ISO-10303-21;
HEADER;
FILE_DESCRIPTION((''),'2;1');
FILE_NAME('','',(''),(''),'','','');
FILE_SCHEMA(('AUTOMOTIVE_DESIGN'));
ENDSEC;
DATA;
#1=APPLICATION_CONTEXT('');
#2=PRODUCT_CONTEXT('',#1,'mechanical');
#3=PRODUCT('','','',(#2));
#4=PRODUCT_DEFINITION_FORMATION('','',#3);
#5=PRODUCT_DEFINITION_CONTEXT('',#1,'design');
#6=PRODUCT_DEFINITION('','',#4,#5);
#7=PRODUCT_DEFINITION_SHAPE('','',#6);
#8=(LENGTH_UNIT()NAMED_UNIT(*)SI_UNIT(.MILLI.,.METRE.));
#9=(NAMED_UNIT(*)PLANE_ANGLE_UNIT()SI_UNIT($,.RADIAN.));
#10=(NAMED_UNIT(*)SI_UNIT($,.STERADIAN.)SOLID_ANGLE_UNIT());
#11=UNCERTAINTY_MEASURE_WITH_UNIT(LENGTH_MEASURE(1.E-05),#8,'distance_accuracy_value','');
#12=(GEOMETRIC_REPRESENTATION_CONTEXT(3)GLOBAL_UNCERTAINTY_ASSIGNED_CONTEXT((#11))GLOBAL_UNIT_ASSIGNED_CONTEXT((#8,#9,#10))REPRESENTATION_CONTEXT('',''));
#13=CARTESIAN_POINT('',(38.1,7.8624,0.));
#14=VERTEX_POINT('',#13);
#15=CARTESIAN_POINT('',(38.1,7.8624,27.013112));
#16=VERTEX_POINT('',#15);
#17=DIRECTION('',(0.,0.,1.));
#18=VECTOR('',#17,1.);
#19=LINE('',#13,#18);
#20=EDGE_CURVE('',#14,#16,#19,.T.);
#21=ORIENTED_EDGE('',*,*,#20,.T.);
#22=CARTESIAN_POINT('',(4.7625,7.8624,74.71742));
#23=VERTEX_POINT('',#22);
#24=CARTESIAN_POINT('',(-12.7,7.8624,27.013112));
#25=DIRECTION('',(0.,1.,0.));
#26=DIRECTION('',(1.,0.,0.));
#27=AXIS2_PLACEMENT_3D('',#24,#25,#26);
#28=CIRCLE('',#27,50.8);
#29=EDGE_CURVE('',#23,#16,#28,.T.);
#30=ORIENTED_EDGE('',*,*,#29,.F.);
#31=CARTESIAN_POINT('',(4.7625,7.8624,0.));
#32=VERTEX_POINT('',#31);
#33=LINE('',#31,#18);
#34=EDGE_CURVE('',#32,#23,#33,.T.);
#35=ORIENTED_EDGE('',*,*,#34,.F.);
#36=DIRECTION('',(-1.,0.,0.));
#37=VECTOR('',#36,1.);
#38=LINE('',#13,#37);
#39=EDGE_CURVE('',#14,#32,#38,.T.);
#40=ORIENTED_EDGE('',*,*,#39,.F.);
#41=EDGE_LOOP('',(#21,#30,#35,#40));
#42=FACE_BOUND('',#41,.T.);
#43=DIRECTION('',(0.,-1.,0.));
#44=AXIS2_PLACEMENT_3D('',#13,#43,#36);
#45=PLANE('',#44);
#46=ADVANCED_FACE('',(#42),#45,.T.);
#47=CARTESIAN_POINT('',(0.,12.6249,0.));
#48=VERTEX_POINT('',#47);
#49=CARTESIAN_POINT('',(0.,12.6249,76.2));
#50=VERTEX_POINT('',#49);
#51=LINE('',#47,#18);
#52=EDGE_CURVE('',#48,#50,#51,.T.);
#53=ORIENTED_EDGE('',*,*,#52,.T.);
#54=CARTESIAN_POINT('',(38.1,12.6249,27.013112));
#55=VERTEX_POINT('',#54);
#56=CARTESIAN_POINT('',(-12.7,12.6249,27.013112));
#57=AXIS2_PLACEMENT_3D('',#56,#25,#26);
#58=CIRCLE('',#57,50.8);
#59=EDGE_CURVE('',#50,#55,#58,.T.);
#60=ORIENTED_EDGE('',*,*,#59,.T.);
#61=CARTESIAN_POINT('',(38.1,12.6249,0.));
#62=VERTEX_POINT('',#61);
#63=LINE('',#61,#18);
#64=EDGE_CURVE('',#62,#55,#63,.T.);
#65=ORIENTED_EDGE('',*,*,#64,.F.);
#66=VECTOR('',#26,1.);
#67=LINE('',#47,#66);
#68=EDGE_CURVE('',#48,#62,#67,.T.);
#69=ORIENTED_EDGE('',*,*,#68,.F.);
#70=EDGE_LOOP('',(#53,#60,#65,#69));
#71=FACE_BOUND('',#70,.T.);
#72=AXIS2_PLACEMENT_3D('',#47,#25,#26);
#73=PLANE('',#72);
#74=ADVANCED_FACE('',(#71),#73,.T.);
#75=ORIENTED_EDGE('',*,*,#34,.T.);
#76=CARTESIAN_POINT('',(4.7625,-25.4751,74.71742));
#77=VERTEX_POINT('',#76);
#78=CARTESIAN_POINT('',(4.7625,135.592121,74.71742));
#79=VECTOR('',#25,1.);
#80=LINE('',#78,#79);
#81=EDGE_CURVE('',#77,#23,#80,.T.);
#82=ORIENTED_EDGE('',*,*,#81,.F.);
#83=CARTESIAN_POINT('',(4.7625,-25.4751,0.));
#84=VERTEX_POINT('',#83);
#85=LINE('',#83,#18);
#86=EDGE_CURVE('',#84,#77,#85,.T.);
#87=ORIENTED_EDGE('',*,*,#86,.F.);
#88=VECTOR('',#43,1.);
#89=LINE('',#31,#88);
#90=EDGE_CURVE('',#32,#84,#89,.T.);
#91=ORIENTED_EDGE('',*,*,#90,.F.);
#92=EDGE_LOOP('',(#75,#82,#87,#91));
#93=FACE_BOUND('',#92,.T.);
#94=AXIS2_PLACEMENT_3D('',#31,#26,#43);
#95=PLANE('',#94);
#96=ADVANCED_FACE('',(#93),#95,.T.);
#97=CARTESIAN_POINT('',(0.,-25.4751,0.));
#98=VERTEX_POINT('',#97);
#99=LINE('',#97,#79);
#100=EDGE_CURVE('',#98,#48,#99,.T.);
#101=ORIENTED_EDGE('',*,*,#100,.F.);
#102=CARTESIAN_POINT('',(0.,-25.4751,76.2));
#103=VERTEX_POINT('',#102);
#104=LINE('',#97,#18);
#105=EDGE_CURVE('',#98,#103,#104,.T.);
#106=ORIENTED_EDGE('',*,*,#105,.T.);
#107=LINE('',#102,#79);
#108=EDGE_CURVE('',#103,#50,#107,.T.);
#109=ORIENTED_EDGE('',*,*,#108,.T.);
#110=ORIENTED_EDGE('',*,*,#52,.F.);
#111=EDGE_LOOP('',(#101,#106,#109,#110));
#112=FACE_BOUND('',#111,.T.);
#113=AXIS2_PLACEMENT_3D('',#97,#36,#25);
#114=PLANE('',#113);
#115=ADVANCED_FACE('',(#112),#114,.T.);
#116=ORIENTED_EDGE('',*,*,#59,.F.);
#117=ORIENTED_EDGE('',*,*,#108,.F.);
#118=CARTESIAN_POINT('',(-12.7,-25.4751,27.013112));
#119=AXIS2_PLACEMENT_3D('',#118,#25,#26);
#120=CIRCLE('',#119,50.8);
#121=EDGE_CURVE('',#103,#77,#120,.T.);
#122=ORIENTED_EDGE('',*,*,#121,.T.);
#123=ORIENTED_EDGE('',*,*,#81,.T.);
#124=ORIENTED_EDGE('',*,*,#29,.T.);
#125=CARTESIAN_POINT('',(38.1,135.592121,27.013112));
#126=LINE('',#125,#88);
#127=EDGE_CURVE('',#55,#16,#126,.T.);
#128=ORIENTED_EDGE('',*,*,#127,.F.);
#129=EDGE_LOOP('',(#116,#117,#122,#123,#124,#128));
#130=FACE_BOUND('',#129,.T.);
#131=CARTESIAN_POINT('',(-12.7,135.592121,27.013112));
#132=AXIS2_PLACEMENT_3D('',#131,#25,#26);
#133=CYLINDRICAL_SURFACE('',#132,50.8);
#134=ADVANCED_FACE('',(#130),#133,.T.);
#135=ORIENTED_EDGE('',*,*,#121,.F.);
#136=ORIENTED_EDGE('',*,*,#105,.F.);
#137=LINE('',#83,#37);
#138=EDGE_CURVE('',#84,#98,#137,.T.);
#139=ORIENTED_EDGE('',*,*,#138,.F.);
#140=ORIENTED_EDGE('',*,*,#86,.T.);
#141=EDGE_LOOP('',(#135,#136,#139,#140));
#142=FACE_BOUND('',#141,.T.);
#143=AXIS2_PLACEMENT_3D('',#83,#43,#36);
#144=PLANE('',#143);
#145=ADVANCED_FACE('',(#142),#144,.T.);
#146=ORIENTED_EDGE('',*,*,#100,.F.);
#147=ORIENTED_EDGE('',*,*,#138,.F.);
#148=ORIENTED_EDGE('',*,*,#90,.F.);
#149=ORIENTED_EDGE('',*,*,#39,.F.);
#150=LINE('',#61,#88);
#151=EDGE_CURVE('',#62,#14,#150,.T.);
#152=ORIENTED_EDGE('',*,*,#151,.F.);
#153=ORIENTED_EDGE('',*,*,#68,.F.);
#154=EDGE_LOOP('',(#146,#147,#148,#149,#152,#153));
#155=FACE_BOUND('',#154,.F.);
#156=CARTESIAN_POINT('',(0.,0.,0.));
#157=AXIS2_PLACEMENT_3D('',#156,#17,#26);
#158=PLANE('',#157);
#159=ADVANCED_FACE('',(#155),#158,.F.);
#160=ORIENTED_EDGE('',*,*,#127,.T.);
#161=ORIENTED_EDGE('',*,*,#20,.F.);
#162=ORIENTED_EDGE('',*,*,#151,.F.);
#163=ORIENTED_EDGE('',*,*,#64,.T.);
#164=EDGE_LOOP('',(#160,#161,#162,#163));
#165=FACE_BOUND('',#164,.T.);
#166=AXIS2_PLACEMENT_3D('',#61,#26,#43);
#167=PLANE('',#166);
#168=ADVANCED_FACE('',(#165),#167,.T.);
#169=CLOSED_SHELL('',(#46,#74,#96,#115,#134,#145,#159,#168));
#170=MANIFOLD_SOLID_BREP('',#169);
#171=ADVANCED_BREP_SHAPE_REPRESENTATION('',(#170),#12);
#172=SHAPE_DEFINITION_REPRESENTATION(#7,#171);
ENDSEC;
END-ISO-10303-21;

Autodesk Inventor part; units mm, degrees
ref_plane "YZ Plane" through (0, 0, 0) normal (1, 0, 0) x (0, 1, 0)
ref_plane "XZ Plane" through (0, 0, 0) normal (0, 1, 0) x (-1, 0, 0)
ref_plane "XY Plane" through (0, 0, 0) normal (0, 0, 1) x (1, 0, 0)
sketch "Sketch1" plane through (0, 0, 0) normal (0, 0, 1) x (1, 0, 0)
  line L0 (0, 12.6249) -> (38.1, 12.6249)
  line L1 (38.1, 12.6249) -> (38.1, 7.8624)
  line L2 (38.1, 7.8624) -> (4.7625, 7.8624)
  line L3 (4.7625, 7.8624) -> (4.7625, -25.4751)
  line L4 (4.7625, -25.4751) -> (0, -25.4751)
  line L5 (0, -25.4751) -> (0, 12.6249)
  point P0 (0, 0)
  dimension "d0" = 38.1
  dimension "d1" = 4.7625
  dimension "d2" = 4.7625
  dimension "d3" = 38.1
extrude "Extrusion1" add sketch "Sketch1" along normal blind 76.2
fillet "Corner Round2" radius 50.8 1 edges at (38.1, 10.2436, 76.2)
equation "\"BendRadius\" = Thickness"
equation "\"BendReliefWidth\" = Thickness"
equation "\"BendReliefDepth\" = 0.5 * Thickness"
equation "\"CornerReliefSize\" = 4 * Thickness"
equation "\"MinimumRemnant\" = 2 * Thickness"
equation "\"TransitionRadius\" = BendRadius"
equation "\"JacobiRadiusSize\" = BendRadius"
equation "\"GapSize\" = Thickness"
equation "\"Thickness\" = 4.7625"
properties part number "RearWheelMount" material "Steel, Mild"
